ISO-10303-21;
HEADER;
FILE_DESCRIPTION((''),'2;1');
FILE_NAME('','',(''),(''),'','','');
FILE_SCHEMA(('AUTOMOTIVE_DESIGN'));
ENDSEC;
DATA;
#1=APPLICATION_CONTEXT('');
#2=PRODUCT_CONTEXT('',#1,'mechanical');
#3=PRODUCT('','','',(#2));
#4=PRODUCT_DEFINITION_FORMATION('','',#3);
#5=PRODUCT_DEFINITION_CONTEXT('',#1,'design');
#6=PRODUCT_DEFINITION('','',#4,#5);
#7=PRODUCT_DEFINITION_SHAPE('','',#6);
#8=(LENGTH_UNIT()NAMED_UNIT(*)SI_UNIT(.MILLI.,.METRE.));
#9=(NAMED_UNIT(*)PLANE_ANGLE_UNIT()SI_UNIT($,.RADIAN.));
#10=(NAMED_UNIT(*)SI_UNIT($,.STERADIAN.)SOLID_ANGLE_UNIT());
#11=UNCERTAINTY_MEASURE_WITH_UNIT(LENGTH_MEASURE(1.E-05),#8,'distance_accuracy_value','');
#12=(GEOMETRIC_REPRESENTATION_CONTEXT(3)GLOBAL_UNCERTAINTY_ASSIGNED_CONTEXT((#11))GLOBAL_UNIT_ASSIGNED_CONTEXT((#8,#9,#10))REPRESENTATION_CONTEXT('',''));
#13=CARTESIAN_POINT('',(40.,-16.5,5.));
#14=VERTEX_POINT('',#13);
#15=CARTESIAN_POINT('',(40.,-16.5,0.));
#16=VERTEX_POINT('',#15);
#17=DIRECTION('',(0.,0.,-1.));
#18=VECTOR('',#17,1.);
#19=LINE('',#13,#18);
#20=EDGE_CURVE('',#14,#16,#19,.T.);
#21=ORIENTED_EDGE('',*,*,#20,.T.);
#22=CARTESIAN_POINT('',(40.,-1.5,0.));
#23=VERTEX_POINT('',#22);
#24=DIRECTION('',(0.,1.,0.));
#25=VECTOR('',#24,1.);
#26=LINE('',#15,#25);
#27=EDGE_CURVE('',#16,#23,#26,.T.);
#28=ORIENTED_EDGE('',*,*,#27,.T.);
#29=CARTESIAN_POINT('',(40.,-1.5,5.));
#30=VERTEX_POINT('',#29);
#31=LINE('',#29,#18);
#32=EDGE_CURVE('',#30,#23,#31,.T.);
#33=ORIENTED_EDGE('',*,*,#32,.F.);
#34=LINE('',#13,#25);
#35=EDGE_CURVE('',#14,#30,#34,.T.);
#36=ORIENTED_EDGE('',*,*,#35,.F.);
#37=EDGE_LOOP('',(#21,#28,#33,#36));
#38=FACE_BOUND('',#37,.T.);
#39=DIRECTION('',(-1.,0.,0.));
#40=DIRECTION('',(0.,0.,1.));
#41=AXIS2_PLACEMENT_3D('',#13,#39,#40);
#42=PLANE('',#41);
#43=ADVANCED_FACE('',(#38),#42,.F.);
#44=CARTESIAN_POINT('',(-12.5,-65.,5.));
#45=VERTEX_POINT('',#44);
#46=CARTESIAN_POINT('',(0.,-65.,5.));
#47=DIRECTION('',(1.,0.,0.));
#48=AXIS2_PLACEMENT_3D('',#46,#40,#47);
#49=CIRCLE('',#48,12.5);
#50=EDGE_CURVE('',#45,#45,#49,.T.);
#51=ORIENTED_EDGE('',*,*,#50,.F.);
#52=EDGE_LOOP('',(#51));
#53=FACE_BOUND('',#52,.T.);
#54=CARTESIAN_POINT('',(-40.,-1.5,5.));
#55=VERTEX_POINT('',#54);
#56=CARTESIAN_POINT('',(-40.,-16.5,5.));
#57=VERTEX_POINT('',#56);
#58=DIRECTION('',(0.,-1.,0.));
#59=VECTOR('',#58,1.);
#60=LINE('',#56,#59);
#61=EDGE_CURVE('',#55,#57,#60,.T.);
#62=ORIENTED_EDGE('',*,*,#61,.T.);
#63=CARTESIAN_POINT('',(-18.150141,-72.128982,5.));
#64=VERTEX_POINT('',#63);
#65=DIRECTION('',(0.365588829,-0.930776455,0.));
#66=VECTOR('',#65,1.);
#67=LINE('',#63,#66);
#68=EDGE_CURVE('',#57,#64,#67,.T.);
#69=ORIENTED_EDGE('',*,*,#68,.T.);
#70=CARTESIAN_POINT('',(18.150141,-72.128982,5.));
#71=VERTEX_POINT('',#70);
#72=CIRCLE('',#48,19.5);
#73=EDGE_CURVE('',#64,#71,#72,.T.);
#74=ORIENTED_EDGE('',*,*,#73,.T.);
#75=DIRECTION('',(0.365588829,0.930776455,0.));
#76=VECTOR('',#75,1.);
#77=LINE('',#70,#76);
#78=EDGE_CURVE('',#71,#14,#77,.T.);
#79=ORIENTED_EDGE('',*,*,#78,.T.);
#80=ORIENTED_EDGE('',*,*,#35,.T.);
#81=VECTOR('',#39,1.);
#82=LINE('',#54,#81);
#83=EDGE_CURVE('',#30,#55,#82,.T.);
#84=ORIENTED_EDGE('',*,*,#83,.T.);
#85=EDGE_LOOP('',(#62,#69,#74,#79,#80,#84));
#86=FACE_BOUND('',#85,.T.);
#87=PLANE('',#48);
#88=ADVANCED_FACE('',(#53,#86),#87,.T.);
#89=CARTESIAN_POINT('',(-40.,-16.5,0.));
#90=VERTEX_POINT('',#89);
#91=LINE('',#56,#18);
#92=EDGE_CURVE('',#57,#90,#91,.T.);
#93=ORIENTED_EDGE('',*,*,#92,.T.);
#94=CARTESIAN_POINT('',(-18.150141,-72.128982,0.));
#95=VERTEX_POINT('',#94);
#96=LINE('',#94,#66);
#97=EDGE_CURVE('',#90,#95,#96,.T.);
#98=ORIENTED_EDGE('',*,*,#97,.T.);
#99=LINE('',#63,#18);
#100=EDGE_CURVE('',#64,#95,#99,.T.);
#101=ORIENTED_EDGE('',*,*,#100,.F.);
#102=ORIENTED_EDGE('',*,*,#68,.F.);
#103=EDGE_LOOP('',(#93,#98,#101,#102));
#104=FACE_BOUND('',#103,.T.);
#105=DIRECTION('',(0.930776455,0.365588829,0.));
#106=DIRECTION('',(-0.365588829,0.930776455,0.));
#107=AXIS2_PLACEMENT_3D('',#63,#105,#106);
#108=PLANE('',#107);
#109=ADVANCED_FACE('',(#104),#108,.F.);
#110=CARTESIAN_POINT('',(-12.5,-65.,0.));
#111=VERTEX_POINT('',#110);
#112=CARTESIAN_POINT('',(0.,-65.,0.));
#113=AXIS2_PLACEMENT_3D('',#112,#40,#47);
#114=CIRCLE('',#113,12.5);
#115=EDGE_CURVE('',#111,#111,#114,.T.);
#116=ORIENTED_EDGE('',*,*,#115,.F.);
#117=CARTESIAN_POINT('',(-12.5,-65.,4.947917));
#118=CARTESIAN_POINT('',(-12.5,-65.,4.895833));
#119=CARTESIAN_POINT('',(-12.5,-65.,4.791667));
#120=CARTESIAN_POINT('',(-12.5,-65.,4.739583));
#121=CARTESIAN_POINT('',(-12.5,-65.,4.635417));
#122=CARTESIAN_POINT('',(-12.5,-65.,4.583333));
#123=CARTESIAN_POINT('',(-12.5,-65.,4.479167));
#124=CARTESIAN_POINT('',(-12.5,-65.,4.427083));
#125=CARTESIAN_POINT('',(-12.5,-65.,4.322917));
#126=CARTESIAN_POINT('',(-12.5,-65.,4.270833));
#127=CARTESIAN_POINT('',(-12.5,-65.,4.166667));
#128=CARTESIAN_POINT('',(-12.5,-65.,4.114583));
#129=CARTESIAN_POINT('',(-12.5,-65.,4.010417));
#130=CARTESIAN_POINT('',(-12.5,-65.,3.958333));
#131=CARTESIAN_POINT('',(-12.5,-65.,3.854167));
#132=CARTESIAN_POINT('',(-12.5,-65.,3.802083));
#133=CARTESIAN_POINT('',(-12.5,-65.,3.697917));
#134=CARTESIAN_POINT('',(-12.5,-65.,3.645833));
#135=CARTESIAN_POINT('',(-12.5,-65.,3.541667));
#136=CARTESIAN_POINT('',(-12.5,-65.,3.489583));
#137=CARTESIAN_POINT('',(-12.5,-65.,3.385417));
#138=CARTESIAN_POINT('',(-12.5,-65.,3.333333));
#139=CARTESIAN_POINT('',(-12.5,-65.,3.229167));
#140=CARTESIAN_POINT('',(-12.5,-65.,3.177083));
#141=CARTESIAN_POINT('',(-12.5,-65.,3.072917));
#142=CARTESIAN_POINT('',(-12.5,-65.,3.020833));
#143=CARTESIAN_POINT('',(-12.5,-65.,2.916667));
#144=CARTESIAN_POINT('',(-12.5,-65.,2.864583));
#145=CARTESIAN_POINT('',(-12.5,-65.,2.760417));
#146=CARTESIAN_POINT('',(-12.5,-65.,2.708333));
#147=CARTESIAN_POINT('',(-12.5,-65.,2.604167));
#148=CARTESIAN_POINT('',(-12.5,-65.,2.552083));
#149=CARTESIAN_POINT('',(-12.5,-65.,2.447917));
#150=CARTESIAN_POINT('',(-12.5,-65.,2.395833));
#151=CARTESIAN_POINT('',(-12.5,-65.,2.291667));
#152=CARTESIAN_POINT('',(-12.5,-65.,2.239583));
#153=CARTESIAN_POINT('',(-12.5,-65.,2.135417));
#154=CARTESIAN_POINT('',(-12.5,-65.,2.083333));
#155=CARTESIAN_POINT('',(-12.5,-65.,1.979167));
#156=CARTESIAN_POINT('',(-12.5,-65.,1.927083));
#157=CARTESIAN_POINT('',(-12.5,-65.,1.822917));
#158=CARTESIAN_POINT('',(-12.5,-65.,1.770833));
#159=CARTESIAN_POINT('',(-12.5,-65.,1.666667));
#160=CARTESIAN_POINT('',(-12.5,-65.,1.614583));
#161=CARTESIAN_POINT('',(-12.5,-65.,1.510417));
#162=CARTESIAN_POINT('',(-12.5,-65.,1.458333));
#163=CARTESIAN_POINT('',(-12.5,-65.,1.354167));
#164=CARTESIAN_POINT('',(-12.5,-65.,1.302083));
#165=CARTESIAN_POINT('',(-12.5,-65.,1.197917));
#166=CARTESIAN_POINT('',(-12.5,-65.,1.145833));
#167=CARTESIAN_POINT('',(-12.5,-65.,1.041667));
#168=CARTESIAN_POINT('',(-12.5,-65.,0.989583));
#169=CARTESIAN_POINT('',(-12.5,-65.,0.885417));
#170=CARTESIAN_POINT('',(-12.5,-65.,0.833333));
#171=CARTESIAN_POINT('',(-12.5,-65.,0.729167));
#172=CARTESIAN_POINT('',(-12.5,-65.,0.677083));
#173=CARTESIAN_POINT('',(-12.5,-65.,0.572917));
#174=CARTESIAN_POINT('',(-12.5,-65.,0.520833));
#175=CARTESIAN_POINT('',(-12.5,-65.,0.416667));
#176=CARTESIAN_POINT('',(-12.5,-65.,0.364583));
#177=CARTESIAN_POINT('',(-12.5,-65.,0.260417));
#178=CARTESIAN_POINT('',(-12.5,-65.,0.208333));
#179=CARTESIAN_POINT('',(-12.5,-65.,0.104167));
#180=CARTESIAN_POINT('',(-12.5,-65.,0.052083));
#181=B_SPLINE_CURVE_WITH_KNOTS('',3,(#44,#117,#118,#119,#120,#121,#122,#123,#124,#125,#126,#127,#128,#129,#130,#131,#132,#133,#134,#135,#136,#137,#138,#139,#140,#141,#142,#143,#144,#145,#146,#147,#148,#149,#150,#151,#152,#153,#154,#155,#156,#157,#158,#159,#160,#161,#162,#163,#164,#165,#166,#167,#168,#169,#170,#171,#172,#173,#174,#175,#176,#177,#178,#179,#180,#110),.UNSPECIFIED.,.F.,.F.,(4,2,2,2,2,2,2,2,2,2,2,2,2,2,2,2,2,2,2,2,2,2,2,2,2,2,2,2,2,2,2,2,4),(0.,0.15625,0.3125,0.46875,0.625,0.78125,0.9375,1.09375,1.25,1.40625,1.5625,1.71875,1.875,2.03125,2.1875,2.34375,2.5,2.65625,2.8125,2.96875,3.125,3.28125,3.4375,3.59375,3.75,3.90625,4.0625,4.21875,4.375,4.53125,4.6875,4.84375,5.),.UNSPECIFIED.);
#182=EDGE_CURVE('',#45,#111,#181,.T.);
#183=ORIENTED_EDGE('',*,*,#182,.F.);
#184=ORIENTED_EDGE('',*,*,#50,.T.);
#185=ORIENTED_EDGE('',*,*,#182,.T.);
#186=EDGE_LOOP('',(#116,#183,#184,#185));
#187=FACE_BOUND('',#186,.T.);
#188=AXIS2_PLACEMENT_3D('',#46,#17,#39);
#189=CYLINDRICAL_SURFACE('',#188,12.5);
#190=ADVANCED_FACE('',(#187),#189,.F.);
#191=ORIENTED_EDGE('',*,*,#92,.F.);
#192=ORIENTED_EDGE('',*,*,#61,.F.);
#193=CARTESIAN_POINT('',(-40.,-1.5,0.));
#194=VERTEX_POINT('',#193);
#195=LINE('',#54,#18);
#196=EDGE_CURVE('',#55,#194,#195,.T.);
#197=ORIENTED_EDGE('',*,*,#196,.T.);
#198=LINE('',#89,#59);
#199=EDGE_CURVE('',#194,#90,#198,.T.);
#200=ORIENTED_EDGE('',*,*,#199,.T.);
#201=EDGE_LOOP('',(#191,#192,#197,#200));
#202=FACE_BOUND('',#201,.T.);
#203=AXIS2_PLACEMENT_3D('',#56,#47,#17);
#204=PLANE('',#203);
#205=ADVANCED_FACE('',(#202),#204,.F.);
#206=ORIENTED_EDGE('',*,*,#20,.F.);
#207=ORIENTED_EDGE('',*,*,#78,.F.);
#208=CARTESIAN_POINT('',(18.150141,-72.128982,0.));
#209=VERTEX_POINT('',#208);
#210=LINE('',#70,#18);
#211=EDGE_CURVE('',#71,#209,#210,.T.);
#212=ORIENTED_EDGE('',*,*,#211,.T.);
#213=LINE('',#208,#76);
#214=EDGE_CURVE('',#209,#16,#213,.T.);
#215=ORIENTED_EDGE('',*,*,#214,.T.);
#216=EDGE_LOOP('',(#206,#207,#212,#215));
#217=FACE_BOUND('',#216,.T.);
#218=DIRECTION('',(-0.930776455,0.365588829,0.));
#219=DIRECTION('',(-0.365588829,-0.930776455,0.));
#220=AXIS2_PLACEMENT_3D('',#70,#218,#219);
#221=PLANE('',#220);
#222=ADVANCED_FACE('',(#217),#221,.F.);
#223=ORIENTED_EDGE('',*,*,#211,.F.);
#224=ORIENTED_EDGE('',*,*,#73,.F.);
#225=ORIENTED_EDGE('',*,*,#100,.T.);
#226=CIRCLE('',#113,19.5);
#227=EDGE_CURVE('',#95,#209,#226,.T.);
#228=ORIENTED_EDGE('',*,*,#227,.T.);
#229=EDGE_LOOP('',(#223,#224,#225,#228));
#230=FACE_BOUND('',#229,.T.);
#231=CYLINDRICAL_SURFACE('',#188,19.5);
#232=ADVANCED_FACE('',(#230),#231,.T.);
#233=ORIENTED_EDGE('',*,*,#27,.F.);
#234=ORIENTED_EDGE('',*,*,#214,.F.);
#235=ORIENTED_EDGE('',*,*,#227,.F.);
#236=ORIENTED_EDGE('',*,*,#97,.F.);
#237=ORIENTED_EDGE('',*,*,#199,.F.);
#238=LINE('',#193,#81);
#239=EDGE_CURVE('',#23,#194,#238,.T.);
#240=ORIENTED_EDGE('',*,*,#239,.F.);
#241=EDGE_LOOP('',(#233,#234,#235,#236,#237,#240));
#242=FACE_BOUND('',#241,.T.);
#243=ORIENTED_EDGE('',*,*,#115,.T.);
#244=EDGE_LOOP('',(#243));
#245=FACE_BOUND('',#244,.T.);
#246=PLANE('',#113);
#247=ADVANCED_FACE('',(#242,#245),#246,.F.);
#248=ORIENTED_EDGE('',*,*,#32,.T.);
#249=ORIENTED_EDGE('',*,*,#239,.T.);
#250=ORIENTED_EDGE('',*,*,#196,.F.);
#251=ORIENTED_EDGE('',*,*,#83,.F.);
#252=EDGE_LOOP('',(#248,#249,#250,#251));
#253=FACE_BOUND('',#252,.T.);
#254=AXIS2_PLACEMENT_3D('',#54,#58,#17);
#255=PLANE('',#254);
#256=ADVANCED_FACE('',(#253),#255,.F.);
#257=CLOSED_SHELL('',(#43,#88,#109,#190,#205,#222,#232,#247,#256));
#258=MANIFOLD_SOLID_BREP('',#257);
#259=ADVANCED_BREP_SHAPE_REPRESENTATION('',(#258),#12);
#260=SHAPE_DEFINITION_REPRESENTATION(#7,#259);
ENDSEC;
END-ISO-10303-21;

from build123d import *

# Parameters (mm, degrees)
SKETCH_2_R             = 12.5
SM_BASE_FLANGE_1_DEPTH = 5


# Sheet-metal steps are written as plain solids
with BuildPart() as part:
    # Sketch 2 → Базовая кромка1 (new body)
    with BuildSketch(Plane.XY):
        with BuildLine():
            Line((-18.150140865, -72.128982157), (-40, -16.5))
            Line((-40, -16.5), (-40, -1.5))
            Line((-40, -1.5), (40, -1.5))
            Line((40, -1.5), (40, -16.5))
            Line((40, -16.5), (18.150140865, -72.128982157))
            ThreePointArc((18.150140865, -72.128982157), (0, -84.5), (-18.150140865, -72.128982157))
        make_face()
        with Locations(Location((0, -65, 0), (0, 0, 180))):
            Circle(SKETCH_2_R, mode=Mode.SUBTRACT)
    extrude(amount=SM_BASE_FLANGE_1_DEPTH)


solid = part.part
